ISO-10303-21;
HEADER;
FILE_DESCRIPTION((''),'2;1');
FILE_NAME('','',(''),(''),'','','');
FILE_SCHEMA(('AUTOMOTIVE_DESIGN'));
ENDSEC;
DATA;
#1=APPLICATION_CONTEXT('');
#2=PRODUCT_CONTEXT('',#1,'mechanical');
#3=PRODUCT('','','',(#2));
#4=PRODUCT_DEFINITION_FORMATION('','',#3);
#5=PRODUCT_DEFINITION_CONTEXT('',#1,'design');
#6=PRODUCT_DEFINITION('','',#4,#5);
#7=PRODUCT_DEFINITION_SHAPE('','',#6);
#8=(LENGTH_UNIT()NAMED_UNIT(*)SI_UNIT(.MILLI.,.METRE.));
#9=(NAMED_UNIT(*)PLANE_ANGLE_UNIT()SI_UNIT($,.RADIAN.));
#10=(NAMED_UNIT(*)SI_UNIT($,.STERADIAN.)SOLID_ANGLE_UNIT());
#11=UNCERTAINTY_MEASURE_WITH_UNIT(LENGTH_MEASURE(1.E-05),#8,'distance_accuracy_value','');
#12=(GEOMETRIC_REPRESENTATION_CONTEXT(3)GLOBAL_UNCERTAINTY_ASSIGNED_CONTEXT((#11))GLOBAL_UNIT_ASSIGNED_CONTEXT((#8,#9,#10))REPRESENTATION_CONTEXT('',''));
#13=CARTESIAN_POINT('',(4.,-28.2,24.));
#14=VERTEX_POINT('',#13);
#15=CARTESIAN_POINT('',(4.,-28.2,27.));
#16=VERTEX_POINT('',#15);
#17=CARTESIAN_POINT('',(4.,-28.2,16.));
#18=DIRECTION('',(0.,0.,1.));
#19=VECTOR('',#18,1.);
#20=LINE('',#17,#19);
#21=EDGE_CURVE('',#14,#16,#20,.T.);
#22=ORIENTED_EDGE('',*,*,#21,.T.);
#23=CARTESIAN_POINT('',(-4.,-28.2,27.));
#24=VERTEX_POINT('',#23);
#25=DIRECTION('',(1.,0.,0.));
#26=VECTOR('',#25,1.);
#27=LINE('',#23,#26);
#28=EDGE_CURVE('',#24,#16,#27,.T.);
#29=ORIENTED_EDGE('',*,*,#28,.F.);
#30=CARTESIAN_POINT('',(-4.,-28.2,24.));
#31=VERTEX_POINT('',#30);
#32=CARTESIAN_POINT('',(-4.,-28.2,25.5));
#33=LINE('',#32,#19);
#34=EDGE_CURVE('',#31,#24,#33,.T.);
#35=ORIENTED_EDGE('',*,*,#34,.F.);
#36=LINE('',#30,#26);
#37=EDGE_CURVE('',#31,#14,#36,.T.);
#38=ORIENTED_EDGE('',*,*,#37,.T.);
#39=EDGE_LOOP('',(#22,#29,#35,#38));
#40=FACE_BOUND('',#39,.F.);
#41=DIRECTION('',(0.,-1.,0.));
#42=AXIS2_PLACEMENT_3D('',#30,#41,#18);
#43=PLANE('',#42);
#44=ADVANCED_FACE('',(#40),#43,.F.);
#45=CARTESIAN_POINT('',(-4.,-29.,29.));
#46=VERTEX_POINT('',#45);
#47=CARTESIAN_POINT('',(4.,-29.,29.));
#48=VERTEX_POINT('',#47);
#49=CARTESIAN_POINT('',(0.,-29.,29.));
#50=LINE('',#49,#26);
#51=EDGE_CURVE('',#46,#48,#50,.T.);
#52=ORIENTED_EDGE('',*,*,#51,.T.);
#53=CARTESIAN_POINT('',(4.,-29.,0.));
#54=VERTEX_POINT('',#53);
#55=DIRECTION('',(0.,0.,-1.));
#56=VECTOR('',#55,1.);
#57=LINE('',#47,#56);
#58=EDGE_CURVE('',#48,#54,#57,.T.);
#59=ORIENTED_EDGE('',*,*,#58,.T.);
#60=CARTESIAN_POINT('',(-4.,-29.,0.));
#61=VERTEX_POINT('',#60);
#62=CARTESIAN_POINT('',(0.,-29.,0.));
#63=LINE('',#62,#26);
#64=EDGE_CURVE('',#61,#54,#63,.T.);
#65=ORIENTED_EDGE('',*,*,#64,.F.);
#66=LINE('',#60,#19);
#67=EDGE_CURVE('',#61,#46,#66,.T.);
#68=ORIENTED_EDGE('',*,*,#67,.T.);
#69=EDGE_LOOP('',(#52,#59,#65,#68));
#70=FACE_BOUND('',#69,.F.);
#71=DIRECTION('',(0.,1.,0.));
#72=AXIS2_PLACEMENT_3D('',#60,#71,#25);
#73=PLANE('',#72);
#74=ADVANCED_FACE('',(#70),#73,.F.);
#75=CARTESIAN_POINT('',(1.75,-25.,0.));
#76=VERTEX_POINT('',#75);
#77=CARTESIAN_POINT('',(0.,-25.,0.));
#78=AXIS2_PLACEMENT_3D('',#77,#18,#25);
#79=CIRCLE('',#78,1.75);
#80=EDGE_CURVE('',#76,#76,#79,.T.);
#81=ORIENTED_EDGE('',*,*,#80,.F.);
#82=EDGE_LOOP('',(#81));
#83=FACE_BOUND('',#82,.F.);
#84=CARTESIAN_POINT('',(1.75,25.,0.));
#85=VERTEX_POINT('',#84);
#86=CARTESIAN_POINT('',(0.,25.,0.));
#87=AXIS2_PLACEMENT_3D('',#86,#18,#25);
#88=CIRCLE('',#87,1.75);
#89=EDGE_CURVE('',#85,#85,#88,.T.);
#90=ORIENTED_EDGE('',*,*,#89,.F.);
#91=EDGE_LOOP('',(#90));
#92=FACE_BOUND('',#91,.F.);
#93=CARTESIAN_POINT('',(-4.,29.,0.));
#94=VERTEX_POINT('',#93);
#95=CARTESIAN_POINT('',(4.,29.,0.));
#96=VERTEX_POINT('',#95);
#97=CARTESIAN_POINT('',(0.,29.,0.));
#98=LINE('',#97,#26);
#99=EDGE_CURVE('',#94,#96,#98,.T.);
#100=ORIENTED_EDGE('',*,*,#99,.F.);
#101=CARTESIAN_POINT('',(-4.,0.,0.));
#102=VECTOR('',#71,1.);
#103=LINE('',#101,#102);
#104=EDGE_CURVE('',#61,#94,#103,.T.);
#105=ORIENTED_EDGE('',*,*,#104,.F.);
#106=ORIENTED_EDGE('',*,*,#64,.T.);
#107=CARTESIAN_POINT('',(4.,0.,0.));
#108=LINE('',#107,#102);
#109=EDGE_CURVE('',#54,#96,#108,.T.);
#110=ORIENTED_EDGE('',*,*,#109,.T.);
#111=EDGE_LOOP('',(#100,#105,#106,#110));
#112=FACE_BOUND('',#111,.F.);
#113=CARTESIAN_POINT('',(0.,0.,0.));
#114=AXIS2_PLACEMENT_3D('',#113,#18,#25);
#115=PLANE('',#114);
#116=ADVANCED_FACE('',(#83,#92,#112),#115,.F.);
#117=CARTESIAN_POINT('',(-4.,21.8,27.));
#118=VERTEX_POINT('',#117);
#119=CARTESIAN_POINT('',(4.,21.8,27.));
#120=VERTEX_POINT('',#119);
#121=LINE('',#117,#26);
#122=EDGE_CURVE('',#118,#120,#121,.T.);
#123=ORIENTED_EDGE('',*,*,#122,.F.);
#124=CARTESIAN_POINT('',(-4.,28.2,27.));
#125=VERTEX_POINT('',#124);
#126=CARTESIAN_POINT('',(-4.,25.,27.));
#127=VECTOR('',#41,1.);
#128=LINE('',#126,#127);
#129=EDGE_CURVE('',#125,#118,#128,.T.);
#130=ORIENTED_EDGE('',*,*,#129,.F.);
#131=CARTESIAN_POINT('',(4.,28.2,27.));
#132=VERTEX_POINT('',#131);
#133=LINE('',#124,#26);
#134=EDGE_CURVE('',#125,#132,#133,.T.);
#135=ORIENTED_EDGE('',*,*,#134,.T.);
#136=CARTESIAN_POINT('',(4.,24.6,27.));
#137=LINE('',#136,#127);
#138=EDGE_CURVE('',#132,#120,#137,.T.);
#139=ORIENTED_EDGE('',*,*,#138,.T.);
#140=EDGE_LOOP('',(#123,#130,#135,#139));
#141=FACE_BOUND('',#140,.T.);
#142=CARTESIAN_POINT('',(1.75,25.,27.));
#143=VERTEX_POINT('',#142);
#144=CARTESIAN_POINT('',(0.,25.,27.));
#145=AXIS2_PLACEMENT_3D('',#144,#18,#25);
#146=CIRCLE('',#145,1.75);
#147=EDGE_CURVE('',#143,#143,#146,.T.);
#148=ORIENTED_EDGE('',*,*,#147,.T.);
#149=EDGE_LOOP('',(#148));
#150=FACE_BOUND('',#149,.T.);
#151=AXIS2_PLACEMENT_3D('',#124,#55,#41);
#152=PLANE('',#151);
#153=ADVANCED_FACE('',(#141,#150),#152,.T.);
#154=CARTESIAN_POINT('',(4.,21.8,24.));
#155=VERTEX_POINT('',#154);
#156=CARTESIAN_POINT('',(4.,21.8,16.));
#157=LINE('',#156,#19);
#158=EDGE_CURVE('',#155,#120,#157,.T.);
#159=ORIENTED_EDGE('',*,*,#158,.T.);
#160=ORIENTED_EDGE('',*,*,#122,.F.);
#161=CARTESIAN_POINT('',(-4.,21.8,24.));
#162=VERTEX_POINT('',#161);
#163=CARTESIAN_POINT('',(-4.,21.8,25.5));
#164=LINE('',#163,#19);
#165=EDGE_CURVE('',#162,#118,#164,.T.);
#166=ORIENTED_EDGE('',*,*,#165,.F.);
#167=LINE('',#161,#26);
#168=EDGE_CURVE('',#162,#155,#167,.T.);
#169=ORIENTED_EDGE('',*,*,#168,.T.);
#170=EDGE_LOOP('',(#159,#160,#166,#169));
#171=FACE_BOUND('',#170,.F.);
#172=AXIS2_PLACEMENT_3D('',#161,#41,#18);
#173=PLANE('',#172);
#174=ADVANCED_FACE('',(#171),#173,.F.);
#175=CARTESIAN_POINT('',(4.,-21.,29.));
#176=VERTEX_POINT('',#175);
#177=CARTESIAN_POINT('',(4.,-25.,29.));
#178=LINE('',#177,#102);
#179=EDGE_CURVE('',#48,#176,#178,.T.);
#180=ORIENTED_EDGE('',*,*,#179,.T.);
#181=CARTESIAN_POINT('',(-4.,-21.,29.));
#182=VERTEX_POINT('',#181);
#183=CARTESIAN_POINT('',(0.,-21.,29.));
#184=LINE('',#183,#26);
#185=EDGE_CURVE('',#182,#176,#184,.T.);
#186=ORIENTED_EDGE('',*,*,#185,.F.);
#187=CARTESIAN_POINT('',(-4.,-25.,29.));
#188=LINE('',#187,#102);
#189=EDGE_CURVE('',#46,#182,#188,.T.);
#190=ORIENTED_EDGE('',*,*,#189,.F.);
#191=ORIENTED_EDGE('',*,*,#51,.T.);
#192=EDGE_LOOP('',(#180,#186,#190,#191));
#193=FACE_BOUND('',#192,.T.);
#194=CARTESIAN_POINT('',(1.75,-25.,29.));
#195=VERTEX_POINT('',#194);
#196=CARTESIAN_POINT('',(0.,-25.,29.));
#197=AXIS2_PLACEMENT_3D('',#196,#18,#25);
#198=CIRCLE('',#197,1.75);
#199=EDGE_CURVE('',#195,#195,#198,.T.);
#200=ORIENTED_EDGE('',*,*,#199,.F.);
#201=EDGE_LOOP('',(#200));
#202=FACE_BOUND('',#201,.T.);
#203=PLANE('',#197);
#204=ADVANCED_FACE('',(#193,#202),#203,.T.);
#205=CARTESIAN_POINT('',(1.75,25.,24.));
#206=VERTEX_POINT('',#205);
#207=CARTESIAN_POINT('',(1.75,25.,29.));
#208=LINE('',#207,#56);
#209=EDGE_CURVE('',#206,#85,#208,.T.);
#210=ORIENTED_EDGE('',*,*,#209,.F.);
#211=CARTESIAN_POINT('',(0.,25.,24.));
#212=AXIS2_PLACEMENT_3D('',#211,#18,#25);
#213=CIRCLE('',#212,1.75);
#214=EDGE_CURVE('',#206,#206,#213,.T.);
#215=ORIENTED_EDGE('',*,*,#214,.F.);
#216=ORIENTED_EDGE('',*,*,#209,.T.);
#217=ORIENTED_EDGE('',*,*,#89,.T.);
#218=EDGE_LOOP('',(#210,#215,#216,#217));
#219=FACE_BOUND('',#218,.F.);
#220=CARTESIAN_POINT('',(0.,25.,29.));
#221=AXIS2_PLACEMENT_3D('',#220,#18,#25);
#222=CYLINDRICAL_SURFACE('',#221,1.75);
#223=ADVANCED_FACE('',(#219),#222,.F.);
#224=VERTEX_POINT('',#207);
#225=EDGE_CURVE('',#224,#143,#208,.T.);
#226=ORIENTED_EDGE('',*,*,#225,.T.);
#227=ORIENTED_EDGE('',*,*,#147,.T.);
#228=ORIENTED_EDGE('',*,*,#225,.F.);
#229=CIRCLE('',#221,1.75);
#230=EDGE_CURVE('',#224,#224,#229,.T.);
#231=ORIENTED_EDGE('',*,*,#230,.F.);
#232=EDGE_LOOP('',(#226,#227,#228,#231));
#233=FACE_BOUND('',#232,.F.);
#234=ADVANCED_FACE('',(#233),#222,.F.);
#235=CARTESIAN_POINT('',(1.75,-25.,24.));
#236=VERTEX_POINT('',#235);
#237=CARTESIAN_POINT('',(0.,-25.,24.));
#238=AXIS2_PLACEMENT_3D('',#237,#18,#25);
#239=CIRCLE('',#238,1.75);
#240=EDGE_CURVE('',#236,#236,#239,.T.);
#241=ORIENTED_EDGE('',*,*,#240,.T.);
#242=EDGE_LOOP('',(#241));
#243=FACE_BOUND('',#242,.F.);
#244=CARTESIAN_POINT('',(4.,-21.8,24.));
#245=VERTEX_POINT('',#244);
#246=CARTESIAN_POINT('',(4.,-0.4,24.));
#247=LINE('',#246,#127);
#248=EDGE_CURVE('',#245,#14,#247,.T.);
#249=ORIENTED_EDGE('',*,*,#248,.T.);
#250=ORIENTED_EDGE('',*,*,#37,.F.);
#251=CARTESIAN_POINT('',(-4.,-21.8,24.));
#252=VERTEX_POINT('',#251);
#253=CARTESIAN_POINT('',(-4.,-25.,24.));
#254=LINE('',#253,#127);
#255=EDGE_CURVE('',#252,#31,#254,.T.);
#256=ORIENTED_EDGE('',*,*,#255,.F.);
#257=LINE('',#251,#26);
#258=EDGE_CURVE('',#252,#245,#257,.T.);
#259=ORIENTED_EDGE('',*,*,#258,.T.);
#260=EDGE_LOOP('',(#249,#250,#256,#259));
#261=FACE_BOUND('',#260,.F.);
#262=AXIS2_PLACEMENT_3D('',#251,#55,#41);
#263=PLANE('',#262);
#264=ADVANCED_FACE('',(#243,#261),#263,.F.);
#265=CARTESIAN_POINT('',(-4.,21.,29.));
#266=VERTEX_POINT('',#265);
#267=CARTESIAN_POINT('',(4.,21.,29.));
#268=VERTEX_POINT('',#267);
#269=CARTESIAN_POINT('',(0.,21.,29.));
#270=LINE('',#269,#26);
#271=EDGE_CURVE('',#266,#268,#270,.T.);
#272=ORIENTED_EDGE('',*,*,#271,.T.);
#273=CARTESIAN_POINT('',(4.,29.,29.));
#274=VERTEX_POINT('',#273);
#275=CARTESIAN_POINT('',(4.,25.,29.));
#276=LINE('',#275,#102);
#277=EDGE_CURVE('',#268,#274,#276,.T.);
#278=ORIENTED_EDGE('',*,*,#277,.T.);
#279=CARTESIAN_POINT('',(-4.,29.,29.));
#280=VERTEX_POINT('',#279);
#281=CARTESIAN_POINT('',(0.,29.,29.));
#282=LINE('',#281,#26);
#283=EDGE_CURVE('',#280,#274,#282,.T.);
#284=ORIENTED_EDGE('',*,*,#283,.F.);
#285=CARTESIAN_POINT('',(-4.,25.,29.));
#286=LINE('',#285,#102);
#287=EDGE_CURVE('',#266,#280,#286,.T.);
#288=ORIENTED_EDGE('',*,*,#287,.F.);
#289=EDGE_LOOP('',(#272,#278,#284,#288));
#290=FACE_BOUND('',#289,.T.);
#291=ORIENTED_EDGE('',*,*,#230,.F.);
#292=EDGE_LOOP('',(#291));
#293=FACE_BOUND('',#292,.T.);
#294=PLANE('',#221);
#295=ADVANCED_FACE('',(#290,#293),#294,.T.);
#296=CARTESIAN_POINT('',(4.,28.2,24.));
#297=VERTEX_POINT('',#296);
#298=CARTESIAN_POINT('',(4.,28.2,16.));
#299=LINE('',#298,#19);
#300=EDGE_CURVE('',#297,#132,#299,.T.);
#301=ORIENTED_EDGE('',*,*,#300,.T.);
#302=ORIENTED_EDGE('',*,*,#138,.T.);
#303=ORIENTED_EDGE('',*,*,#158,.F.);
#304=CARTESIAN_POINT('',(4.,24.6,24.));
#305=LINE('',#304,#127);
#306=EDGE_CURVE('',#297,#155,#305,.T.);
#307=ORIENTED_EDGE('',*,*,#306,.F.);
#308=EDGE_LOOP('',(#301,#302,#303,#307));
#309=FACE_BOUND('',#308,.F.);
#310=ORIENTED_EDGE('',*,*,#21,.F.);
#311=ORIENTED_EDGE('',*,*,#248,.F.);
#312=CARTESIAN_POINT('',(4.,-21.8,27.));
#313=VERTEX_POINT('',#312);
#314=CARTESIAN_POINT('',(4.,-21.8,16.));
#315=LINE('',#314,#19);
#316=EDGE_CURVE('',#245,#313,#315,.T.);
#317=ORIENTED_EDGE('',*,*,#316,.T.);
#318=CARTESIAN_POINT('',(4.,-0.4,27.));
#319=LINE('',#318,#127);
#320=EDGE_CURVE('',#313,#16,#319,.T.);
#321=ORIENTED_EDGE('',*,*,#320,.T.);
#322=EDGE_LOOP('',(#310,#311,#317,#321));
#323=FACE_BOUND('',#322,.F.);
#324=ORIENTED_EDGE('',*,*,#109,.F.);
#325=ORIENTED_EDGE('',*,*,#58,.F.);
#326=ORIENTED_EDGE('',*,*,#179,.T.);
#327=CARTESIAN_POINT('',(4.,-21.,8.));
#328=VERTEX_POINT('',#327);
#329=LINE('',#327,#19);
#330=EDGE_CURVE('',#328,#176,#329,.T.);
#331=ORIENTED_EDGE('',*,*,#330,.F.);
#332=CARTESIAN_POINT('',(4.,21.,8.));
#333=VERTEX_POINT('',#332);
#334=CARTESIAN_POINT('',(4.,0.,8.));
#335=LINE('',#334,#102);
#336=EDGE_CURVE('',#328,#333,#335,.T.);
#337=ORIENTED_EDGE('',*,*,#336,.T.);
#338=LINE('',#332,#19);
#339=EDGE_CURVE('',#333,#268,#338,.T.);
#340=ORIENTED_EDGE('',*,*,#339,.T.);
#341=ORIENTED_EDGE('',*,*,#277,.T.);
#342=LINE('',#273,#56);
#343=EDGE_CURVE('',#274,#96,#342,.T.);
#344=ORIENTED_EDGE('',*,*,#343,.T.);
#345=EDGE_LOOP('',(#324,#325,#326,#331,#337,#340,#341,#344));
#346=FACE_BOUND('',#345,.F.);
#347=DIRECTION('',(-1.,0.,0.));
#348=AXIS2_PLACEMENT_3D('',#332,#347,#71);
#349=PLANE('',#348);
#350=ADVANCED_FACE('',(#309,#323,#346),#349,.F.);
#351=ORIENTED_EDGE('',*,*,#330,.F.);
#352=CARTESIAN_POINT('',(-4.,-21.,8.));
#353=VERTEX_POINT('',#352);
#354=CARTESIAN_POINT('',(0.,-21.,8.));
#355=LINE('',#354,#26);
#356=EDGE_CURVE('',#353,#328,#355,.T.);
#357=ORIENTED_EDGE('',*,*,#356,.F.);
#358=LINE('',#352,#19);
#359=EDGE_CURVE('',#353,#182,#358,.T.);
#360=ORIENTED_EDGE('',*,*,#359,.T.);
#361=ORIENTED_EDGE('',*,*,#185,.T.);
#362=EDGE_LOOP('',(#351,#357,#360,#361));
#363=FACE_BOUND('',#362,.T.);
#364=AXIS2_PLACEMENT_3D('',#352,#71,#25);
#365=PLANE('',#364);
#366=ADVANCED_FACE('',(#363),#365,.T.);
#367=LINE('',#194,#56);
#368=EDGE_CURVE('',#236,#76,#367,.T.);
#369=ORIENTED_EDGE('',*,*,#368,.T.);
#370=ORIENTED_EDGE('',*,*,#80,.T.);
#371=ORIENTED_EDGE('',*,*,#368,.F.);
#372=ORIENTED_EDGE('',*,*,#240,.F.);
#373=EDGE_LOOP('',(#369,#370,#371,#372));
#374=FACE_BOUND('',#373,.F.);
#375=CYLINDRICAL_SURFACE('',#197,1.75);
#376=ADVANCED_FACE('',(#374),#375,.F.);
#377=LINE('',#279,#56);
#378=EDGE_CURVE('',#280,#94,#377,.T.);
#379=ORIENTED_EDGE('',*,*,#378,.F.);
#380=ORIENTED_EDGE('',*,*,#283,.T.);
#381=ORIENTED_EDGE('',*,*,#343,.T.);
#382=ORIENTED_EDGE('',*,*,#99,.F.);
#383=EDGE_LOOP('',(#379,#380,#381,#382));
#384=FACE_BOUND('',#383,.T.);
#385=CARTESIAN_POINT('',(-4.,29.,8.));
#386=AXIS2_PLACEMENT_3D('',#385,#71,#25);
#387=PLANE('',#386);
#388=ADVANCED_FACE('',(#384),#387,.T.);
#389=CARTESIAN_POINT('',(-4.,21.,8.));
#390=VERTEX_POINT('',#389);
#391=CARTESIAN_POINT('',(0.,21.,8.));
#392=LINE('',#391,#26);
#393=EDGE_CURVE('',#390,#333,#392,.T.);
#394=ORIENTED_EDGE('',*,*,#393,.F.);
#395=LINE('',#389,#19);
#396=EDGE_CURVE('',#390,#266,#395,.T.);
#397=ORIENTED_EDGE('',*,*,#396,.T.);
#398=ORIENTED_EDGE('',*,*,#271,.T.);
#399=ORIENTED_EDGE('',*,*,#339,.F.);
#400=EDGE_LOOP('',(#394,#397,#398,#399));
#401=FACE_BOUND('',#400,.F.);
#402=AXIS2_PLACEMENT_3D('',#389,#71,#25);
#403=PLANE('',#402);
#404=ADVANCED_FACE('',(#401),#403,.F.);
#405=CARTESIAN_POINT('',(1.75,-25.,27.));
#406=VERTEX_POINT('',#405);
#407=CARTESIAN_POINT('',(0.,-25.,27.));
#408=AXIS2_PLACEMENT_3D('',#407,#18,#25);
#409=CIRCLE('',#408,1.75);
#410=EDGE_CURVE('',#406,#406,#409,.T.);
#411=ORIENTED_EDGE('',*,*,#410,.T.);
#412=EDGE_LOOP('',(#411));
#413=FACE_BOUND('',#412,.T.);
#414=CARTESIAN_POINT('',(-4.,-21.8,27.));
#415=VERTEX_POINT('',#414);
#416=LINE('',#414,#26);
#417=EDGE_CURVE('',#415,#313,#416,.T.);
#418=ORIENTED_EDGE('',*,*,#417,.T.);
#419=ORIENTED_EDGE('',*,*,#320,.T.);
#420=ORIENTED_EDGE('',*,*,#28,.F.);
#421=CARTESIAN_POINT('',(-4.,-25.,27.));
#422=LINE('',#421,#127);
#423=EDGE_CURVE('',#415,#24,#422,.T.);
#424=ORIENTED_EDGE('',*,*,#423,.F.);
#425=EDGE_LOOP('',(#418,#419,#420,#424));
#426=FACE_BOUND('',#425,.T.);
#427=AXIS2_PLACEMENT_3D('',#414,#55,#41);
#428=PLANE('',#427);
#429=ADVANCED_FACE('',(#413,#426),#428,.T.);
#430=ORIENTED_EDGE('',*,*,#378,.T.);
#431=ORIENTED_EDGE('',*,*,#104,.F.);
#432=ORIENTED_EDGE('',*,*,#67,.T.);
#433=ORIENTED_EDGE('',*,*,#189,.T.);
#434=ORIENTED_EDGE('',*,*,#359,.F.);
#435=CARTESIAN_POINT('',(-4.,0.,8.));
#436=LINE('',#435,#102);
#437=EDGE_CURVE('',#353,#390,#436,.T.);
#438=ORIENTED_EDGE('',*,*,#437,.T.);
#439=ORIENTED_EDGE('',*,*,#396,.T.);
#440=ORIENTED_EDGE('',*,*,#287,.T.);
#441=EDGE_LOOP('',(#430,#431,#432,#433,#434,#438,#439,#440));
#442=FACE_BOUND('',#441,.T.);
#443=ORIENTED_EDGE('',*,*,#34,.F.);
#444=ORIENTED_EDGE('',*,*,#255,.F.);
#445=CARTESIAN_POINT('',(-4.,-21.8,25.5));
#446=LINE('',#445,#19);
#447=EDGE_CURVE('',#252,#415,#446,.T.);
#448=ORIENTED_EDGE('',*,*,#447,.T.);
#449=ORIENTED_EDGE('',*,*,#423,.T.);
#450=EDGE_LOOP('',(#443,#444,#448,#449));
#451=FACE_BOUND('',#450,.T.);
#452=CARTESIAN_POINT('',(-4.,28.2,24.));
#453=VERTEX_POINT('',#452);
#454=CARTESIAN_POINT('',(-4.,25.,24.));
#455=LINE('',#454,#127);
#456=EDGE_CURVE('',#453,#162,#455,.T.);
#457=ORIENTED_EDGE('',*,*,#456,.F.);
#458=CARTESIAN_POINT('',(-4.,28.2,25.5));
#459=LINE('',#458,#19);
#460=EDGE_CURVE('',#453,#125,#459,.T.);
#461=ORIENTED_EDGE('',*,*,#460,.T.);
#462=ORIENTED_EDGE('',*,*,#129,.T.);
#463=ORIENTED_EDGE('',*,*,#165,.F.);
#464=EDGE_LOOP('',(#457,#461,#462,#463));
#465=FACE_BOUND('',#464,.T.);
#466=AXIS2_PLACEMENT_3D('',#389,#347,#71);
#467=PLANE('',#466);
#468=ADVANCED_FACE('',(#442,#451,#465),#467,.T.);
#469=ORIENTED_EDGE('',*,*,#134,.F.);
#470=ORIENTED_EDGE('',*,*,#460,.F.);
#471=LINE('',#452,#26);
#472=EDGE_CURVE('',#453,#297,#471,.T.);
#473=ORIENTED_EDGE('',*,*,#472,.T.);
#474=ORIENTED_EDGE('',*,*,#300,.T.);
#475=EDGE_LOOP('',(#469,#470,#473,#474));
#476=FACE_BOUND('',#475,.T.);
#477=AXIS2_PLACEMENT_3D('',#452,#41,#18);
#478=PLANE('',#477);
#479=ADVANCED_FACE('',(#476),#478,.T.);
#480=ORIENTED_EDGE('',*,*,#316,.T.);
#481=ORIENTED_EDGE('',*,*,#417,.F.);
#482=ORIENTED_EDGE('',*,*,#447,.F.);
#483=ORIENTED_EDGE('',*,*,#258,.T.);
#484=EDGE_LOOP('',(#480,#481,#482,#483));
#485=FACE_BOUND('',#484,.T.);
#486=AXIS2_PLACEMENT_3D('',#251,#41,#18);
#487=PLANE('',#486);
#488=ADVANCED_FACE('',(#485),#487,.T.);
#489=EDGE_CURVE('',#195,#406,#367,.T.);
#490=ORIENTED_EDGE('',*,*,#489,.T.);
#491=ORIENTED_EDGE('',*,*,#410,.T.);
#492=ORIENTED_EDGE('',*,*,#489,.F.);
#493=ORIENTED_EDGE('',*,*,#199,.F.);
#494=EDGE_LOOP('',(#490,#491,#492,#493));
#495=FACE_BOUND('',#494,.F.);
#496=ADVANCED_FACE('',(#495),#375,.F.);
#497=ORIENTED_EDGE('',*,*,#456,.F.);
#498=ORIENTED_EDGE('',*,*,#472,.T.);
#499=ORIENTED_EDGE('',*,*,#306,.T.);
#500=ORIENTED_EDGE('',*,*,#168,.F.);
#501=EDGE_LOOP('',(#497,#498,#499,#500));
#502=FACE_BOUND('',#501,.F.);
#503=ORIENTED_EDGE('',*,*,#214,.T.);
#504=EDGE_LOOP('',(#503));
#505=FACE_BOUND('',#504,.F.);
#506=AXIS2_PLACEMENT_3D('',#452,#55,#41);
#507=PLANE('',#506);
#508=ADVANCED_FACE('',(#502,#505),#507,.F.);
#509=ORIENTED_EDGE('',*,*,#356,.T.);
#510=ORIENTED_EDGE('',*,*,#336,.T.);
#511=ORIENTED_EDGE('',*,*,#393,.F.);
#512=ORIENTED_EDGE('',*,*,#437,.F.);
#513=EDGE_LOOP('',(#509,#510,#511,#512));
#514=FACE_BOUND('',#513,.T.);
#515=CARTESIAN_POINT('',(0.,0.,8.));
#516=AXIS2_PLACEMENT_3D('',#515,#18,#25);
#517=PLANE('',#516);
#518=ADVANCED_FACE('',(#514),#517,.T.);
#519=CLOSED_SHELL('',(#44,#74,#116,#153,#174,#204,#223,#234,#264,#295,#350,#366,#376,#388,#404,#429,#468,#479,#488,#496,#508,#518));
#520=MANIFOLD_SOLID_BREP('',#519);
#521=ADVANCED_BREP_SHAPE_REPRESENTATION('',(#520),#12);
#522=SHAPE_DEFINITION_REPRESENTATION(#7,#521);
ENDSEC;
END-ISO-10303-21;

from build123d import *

# Parameters (mm, degrees)
F1_W     = 8
F1_H     = 58
F2_DEPTH = 8
F3_W     = 8
F3_H     = 8
F4_DEPTH = 21
F5_R     = 1.75
F6_DEPTH = 30
F7_W     = 6.4
F7_H     = 3
F8_DEPTH = 25
F9_DEPTH = 30


# Not quite as in the source:
# - a feature names something its author has since deleted; it is built from what else it names


with BuildPart() as f2:
    # F1 (on Top) → F2 (new body)
    with BuildSketch(Plane.XY):
        Rectangle(F1_W, F1_H)
    extrude(amount=F2_DEPTH)

    # F3 (on face) → F4 (join)
    with BuildSketch(Plane.XY.offset(8)):
        with Locations((0, 25)):
            Rectangle(F3_W, F3_H)
        with Locations((0, -25)):
            Rectangle(F3_W, F3_H)
    extrude(amount=F4_DEPTH)

    # F5 (on face) → F6 (cut)
    with BuildSketch(Plane.XY.offset(29)):
        with Locations((0, 25)):
            Circle(F5_R)
    extrude(amount=-F6_DEPTH, mode=Mode.SUBTRACT)

    # F7 (on face) → F8 (cut)
    with BuildSketch(Plane(origin=(-4, 0, 0), x_dir=(0, -1, 0), z_dir=(-1, 0, 0))):
        with Locations((-25, 25.5)):
            Rectangle(F7_W, F7_H)
        with Locations((25, 25.5)):
            Rectangle(F7_W, F7_H)
    extrude(amount=-F8_DEPTH, mode=Mode.SUBTRACT)

    # F5 (on face) → F9 (cut)
    with BuildSketch(Plane.XY.offset(29)):
        with Locations((0, 25)):
            Circle(F5_R)
        with Locations((0, -25)):
            Circle(F5_R)
    extrude(amount=-F9_DEPTH, mode=Mode.SUBTRACT)


solid = f2.part
